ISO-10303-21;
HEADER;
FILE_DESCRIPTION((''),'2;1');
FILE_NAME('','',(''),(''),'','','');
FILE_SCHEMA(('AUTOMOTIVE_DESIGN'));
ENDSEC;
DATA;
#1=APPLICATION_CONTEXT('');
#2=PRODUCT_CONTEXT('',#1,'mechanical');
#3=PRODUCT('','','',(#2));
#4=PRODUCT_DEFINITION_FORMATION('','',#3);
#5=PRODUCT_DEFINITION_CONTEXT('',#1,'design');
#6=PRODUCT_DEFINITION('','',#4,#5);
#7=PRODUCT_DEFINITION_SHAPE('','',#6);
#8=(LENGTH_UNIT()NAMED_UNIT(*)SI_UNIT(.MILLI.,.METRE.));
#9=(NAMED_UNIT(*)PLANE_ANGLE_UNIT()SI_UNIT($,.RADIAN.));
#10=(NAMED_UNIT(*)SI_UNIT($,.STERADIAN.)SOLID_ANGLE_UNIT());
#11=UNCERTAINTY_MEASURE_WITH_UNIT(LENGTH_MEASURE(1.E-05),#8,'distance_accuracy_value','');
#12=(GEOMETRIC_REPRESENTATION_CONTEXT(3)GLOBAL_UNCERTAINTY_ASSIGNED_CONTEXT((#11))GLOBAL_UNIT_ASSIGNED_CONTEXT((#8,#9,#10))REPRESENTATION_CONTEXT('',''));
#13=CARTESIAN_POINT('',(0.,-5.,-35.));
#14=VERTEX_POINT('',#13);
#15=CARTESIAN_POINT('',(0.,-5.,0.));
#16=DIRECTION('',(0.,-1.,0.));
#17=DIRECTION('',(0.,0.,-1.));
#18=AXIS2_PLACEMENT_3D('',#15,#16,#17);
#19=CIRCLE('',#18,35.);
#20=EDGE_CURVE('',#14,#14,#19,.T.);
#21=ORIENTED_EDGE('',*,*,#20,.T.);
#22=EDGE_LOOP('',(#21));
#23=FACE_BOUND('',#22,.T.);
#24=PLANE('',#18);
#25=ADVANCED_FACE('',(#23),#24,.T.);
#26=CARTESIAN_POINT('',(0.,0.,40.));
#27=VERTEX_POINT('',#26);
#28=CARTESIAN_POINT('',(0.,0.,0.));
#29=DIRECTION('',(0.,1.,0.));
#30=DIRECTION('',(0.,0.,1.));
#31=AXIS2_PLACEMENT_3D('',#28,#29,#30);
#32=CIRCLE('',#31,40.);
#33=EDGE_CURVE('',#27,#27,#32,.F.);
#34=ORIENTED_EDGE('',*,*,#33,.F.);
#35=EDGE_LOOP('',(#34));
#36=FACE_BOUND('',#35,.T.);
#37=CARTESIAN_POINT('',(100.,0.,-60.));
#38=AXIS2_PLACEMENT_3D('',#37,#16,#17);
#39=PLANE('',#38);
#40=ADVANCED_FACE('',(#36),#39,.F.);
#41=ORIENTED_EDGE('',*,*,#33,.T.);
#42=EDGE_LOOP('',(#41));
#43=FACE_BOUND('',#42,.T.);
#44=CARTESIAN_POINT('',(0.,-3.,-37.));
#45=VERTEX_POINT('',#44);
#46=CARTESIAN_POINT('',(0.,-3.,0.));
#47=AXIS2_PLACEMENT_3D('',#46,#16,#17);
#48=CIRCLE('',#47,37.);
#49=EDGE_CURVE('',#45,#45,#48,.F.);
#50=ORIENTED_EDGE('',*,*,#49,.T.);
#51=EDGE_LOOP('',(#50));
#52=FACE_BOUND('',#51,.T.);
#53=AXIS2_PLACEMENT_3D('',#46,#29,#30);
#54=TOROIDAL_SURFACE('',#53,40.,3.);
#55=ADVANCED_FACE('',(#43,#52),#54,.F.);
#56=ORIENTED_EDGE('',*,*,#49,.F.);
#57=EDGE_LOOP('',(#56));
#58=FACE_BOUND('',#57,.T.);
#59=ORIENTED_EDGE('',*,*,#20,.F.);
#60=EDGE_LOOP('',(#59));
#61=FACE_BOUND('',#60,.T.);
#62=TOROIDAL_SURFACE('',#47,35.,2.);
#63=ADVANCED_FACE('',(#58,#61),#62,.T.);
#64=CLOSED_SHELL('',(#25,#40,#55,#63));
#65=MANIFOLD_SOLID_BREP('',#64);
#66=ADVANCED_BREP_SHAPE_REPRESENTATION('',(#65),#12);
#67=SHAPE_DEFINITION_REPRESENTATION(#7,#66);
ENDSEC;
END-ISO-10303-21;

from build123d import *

# Parameters (mm, degrees)
SKETCH1_W           = 200
SKETCH1_H           = 2
BOSS_EXTRUDE1_DEPTH = 60
SKETCH2_R           = 37
BOSS_EXTRUDE2_DEPTH = 5
FILLET1_R           = 2
FILLET2_R           = 3
SKETCH4_W           = 120
SKETCH4_H           = 2
CUT_EXTRUDE1_DEPTH  = 209.865985742


with BuildPart() as part:
    # Sketch1 → Boss-Extrude1 (new, symmetric)
    with BuildSketch(Plane.XY):
        with Locations((0, 1)):
            Rectangle(SKETCH1_W, SKETCH1_H)
    extrude(amount=BOSS_EXTRUDE1_DEPTH, both=True)

    # Sketch2 → Boss-Extrude2 (add)
    with BuildSketch(Plane.XZ):
        with Locations(Location((0, 0, 0), (0, 0, 270))):
            Circle(SKETCH2_R)
    extrude(amount=BOSS_EXTRUDE2_DEPTH)

    # Fillet1
    fillet1_edges = [part.edges().sort_by_distance(p)[0] for p in [
        (0, -5, 37),
    ]]
    fillet(fillet1_edges, radius=FILLET1_R)

    # Fillet2
    fillet2_edges = [part.edges().sort_by_distance(p)[0] for p in [
        (0, 0, 37),
    ]]
    fillet(fillet2_edges, radius=FILLET2_R - 0.0001)  # a hair under: the kernel refuses the full size

    # Sketch4 → Cut-Extrude1 (cut, through all)
    with BuildSketch(Plane.ZY.offset(100)):
        with Locations((0, 1)):
            Rectangle(SKETCH4_W, SKETCH4_H)
    extrude(amount=-CUT_EXTRUDE1_DEPTH, mode=Mode.SUBTRACT)


solid = part.part
